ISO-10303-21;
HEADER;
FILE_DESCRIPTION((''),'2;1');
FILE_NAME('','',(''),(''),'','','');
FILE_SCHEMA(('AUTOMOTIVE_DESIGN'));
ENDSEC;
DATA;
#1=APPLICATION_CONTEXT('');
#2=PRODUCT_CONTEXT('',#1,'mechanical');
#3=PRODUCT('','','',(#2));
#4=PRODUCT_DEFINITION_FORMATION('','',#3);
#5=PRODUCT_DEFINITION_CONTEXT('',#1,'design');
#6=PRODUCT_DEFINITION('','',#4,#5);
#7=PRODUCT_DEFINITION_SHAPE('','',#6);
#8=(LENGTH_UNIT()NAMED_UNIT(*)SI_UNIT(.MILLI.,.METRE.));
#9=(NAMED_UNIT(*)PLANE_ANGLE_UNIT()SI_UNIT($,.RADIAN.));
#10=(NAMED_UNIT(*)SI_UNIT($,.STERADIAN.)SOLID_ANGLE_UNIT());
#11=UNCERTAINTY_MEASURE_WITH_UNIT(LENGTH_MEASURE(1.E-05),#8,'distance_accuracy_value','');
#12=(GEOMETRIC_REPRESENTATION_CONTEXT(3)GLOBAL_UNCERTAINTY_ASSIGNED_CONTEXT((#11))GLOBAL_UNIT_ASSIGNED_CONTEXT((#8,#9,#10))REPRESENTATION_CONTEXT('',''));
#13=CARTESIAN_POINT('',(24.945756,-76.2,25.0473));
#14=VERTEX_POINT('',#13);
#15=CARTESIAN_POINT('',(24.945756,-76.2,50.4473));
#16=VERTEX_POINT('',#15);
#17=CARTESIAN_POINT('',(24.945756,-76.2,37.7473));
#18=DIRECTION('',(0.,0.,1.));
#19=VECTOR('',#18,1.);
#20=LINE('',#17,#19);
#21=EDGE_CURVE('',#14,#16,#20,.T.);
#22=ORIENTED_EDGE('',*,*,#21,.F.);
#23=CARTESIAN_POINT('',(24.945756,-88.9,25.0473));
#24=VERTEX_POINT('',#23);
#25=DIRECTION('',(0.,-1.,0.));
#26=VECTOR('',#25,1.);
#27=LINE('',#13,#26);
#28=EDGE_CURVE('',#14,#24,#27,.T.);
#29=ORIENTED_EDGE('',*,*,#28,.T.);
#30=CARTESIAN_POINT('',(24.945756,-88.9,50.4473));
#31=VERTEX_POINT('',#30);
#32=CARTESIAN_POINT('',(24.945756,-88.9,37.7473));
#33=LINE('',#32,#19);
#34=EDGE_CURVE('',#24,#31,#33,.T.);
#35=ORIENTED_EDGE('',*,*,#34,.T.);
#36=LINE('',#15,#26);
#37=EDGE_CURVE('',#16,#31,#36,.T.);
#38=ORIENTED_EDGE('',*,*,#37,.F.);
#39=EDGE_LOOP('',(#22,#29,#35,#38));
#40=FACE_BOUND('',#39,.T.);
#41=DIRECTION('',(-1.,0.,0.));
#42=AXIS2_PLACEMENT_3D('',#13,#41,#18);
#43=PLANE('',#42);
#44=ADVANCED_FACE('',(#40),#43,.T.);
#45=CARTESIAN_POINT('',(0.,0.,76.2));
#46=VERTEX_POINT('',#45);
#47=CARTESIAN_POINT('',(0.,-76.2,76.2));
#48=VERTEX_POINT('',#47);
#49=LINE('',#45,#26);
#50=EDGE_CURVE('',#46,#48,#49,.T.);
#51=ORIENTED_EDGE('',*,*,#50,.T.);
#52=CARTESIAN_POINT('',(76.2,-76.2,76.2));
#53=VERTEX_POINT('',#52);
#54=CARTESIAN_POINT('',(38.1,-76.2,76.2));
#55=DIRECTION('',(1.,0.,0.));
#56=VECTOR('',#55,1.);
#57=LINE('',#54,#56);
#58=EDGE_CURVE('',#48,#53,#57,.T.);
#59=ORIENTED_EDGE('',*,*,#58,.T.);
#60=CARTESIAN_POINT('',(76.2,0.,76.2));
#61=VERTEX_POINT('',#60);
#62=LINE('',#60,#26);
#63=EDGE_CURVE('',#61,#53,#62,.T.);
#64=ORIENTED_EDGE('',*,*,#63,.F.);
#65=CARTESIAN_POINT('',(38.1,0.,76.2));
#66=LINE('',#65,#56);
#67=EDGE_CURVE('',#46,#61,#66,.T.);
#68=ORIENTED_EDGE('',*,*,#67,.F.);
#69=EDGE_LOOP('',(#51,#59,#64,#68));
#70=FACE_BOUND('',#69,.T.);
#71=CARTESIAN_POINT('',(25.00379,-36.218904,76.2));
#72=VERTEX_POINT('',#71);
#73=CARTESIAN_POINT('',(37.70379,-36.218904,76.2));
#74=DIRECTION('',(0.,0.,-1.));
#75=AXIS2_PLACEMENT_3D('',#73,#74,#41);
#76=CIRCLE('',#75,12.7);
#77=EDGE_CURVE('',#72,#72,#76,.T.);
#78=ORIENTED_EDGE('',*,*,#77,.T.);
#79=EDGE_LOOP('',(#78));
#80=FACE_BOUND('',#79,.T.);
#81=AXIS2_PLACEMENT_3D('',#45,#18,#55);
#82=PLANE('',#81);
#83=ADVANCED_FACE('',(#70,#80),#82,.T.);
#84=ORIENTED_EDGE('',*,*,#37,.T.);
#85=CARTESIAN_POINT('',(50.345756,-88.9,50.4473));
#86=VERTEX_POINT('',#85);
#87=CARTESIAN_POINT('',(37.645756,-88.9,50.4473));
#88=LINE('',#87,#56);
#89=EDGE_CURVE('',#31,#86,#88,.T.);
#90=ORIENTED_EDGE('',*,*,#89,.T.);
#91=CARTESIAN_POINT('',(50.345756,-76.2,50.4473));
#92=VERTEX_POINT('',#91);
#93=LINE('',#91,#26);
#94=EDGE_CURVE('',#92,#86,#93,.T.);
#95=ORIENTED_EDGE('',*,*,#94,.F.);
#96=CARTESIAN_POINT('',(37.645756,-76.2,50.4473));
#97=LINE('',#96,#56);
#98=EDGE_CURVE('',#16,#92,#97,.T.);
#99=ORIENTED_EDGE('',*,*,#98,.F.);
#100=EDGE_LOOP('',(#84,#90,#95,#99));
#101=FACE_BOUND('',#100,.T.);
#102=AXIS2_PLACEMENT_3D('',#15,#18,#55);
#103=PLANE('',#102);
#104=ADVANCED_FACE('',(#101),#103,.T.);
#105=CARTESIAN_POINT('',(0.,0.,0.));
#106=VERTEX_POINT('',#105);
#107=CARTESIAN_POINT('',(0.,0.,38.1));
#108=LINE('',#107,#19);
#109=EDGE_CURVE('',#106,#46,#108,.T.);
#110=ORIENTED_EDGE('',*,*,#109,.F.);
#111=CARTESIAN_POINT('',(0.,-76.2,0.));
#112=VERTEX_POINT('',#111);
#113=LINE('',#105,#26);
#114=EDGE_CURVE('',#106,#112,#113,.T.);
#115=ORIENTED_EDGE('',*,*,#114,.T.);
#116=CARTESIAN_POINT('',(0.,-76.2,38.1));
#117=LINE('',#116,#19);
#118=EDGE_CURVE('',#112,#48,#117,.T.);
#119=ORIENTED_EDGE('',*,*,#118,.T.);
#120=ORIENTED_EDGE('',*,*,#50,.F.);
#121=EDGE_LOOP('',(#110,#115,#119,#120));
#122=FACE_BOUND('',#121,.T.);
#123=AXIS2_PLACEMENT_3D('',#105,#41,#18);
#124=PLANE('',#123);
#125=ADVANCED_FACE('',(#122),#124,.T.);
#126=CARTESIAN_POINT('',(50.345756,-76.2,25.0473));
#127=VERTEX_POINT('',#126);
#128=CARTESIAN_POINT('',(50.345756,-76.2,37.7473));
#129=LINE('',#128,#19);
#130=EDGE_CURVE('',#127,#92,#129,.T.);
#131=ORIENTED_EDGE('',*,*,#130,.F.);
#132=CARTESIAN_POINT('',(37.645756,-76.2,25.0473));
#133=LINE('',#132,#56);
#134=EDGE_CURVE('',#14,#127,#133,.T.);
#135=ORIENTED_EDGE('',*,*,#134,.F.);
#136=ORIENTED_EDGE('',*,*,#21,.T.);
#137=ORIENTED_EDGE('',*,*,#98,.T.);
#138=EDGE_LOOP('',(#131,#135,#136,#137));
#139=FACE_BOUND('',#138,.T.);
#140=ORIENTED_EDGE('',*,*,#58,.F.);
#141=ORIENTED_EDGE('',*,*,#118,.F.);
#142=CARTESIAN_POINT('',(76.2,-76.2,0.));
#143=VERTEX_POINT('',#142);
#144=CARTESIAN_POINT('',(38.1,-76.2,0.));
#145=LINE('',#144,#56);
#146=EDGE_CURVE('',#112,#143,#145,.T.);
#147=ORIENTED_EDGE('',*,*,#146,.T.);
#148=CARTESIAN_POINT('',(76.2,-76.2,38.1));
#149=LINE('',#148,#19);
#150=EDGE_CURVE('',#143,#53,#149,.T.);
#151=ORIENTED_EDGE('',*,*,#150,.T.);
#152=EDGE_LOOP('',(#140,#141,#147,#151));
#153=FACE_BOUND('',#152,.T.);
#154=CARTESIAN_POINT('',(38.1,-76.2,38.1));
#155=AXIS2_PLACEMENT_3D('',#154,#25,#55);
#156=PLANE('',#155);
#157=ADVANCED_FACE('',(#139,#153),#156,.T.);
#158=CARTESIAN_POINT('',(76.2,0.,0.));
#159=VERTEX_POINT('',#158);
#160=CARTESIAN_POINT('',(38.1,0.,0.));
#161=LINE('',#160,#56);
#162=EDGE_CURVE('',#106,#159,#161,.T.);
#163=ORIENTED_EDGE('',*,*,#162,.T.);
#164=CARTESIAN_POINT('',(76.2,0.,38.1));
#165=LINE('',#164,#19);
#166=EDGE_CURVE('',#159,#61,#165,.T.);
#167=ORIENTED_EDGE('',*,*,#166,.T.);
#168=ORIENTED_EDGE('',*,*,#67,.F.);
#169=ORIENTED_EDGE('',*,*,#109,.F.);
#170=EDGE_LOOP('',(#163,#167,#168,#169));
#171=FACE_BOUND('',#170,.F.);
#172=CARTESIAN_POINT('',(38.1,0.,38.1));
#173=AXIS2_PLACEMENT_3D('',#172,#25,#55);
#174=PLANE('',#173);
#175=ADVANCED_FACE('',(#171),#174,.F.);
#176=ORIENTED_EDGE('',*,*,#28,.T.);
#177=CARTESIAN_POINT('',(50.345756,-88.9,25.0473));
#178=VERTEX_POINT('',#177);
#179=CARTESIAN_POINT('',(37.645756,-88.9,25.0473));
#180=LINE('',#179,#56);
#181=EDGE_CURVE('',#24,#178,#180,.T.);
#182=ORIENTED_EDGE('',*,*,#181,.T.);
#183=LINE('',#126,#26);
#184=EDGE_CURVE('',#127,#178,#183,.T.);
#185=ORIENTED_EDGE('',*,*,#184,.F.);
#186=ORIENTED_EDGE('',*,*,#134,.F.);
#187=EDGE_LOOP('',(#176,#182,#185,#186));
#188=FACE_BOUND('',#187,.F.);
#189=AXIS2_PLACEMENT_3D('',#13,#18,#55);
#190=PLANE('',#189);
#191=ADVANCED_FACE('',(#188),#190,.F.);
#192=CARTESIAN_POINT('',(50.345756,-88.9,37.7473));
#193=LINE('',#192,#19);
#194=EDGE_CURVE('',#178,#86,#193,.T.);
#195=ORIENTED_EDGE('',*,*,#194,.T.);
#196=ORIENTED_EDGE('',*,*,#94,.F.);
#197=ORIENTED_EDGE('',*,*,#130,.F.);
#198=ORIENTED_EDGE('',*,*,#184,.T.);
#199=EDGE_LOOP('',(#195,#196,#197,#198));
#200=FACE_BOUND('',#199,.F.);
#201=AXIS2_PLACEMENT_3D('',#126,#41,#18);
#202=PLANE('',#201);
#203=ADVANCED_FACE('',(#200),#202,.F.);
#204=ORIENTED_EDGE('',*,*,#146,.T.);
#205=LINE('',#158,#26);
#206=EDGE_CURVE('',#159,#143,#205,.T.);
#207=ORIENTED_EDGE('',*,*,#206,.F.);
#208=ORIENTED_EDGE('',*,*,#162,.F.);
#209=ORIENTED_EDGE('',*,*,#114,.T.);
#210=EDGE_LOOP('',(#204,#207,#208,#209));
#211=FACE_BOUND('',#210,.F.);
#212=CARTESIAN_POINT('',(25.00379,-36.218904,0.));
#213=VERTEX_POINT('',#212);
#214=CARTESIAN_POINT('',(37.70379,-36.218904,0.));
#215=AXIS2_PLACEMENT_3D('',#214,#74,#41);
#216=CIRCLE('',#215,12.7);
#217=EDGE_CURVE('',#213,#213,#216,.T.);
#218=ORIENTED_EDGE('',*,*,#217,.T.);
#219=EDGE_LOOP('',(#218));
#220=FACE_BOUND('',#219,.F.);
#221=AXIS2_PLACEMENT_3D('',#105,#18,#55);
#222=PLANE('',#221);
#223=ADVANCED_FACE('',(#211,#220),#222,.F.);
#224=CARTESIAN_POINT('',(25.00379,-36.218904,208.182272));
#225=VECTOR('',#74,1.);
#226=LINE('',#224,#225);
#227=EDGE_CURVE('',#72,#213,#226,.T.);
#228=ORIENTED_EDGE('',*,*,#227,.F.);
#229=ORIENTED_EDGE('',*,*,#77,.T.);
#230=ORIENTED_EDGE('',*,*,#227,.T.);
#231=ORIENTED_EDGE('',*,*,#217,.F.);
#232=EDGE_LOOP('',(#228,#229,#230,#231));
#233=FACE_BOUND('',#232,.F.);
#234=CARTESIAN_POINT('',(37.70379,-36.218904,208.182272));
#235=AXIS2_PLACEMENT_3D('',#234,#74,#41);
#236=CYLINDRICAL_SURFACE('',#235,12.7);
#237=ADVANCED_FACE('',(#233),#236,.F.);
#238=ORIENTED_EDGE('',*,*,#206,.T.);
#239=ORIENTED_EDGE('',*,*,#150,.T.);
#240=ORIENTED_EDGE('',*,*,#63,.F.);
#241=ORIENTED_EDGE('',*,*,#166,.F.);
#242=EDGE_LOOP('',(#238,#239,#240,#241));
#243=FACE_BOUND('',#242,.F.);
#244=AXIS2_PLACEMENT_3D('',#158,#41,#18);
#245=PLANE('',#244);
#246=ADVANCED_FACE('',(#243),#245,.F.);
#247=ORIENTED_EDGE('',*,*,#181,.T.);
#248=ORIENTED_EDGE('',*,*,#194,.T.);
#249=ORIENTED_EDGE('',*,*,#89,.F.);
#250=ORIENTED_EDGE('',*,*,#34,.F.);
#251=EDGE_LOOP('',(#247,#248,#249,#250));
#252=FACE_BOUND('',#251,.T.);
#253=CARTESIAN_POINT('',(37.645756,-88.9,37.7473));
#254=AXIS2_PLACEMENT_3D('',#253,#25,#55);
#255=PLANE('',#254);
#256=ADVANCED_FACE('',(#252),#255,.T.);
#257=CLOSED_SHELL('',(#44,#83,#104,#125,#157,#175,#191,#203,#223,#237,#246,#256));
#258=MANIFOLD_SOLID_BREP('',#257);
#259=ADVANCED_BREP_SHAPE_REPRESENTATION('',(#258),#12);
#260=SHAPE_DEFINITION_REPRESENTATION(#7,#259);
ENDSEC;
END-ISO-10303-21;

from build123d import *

# Parameters (mm, degrees)
F0_W     = 76.2
F0_H     = 76.2
F1_DEPTH = 76.2
F3_D     = 25.4
F4_W     = 25.4
F4_H     = 25.4
F5_DEPTH = 12.7


# Not quite as in the source:
# - the program builds the solid bodies; features that only make, move or delete a surface that nothing else refers to are left out


with BuildPart() as f1:
    # F0 (on Front) → F1 (new body)
    with BuildSketch(Plane.XZ):
        with Locations((38.1, 38.1)):
            Rectangle(F0_W, F0_H)
    extrude(amount=F1_DEPTH)

    # F3 (through all)
    with Locations(Plane.XY.offset(76.2)):
        with Locations((37.7037897706, -36.2189039588)):
            Hole(F3_D / 2)

    # F4 (on face) → F5 (join)
    with BuildSketch(Plane.XZ.offset(76.2)):
        with Locations((37.6457564205, 37.7473003834)):
            Rectangle(F4_W, F4_H)
    extrude(amount=F5_DEPTH)


solid = f1.part
